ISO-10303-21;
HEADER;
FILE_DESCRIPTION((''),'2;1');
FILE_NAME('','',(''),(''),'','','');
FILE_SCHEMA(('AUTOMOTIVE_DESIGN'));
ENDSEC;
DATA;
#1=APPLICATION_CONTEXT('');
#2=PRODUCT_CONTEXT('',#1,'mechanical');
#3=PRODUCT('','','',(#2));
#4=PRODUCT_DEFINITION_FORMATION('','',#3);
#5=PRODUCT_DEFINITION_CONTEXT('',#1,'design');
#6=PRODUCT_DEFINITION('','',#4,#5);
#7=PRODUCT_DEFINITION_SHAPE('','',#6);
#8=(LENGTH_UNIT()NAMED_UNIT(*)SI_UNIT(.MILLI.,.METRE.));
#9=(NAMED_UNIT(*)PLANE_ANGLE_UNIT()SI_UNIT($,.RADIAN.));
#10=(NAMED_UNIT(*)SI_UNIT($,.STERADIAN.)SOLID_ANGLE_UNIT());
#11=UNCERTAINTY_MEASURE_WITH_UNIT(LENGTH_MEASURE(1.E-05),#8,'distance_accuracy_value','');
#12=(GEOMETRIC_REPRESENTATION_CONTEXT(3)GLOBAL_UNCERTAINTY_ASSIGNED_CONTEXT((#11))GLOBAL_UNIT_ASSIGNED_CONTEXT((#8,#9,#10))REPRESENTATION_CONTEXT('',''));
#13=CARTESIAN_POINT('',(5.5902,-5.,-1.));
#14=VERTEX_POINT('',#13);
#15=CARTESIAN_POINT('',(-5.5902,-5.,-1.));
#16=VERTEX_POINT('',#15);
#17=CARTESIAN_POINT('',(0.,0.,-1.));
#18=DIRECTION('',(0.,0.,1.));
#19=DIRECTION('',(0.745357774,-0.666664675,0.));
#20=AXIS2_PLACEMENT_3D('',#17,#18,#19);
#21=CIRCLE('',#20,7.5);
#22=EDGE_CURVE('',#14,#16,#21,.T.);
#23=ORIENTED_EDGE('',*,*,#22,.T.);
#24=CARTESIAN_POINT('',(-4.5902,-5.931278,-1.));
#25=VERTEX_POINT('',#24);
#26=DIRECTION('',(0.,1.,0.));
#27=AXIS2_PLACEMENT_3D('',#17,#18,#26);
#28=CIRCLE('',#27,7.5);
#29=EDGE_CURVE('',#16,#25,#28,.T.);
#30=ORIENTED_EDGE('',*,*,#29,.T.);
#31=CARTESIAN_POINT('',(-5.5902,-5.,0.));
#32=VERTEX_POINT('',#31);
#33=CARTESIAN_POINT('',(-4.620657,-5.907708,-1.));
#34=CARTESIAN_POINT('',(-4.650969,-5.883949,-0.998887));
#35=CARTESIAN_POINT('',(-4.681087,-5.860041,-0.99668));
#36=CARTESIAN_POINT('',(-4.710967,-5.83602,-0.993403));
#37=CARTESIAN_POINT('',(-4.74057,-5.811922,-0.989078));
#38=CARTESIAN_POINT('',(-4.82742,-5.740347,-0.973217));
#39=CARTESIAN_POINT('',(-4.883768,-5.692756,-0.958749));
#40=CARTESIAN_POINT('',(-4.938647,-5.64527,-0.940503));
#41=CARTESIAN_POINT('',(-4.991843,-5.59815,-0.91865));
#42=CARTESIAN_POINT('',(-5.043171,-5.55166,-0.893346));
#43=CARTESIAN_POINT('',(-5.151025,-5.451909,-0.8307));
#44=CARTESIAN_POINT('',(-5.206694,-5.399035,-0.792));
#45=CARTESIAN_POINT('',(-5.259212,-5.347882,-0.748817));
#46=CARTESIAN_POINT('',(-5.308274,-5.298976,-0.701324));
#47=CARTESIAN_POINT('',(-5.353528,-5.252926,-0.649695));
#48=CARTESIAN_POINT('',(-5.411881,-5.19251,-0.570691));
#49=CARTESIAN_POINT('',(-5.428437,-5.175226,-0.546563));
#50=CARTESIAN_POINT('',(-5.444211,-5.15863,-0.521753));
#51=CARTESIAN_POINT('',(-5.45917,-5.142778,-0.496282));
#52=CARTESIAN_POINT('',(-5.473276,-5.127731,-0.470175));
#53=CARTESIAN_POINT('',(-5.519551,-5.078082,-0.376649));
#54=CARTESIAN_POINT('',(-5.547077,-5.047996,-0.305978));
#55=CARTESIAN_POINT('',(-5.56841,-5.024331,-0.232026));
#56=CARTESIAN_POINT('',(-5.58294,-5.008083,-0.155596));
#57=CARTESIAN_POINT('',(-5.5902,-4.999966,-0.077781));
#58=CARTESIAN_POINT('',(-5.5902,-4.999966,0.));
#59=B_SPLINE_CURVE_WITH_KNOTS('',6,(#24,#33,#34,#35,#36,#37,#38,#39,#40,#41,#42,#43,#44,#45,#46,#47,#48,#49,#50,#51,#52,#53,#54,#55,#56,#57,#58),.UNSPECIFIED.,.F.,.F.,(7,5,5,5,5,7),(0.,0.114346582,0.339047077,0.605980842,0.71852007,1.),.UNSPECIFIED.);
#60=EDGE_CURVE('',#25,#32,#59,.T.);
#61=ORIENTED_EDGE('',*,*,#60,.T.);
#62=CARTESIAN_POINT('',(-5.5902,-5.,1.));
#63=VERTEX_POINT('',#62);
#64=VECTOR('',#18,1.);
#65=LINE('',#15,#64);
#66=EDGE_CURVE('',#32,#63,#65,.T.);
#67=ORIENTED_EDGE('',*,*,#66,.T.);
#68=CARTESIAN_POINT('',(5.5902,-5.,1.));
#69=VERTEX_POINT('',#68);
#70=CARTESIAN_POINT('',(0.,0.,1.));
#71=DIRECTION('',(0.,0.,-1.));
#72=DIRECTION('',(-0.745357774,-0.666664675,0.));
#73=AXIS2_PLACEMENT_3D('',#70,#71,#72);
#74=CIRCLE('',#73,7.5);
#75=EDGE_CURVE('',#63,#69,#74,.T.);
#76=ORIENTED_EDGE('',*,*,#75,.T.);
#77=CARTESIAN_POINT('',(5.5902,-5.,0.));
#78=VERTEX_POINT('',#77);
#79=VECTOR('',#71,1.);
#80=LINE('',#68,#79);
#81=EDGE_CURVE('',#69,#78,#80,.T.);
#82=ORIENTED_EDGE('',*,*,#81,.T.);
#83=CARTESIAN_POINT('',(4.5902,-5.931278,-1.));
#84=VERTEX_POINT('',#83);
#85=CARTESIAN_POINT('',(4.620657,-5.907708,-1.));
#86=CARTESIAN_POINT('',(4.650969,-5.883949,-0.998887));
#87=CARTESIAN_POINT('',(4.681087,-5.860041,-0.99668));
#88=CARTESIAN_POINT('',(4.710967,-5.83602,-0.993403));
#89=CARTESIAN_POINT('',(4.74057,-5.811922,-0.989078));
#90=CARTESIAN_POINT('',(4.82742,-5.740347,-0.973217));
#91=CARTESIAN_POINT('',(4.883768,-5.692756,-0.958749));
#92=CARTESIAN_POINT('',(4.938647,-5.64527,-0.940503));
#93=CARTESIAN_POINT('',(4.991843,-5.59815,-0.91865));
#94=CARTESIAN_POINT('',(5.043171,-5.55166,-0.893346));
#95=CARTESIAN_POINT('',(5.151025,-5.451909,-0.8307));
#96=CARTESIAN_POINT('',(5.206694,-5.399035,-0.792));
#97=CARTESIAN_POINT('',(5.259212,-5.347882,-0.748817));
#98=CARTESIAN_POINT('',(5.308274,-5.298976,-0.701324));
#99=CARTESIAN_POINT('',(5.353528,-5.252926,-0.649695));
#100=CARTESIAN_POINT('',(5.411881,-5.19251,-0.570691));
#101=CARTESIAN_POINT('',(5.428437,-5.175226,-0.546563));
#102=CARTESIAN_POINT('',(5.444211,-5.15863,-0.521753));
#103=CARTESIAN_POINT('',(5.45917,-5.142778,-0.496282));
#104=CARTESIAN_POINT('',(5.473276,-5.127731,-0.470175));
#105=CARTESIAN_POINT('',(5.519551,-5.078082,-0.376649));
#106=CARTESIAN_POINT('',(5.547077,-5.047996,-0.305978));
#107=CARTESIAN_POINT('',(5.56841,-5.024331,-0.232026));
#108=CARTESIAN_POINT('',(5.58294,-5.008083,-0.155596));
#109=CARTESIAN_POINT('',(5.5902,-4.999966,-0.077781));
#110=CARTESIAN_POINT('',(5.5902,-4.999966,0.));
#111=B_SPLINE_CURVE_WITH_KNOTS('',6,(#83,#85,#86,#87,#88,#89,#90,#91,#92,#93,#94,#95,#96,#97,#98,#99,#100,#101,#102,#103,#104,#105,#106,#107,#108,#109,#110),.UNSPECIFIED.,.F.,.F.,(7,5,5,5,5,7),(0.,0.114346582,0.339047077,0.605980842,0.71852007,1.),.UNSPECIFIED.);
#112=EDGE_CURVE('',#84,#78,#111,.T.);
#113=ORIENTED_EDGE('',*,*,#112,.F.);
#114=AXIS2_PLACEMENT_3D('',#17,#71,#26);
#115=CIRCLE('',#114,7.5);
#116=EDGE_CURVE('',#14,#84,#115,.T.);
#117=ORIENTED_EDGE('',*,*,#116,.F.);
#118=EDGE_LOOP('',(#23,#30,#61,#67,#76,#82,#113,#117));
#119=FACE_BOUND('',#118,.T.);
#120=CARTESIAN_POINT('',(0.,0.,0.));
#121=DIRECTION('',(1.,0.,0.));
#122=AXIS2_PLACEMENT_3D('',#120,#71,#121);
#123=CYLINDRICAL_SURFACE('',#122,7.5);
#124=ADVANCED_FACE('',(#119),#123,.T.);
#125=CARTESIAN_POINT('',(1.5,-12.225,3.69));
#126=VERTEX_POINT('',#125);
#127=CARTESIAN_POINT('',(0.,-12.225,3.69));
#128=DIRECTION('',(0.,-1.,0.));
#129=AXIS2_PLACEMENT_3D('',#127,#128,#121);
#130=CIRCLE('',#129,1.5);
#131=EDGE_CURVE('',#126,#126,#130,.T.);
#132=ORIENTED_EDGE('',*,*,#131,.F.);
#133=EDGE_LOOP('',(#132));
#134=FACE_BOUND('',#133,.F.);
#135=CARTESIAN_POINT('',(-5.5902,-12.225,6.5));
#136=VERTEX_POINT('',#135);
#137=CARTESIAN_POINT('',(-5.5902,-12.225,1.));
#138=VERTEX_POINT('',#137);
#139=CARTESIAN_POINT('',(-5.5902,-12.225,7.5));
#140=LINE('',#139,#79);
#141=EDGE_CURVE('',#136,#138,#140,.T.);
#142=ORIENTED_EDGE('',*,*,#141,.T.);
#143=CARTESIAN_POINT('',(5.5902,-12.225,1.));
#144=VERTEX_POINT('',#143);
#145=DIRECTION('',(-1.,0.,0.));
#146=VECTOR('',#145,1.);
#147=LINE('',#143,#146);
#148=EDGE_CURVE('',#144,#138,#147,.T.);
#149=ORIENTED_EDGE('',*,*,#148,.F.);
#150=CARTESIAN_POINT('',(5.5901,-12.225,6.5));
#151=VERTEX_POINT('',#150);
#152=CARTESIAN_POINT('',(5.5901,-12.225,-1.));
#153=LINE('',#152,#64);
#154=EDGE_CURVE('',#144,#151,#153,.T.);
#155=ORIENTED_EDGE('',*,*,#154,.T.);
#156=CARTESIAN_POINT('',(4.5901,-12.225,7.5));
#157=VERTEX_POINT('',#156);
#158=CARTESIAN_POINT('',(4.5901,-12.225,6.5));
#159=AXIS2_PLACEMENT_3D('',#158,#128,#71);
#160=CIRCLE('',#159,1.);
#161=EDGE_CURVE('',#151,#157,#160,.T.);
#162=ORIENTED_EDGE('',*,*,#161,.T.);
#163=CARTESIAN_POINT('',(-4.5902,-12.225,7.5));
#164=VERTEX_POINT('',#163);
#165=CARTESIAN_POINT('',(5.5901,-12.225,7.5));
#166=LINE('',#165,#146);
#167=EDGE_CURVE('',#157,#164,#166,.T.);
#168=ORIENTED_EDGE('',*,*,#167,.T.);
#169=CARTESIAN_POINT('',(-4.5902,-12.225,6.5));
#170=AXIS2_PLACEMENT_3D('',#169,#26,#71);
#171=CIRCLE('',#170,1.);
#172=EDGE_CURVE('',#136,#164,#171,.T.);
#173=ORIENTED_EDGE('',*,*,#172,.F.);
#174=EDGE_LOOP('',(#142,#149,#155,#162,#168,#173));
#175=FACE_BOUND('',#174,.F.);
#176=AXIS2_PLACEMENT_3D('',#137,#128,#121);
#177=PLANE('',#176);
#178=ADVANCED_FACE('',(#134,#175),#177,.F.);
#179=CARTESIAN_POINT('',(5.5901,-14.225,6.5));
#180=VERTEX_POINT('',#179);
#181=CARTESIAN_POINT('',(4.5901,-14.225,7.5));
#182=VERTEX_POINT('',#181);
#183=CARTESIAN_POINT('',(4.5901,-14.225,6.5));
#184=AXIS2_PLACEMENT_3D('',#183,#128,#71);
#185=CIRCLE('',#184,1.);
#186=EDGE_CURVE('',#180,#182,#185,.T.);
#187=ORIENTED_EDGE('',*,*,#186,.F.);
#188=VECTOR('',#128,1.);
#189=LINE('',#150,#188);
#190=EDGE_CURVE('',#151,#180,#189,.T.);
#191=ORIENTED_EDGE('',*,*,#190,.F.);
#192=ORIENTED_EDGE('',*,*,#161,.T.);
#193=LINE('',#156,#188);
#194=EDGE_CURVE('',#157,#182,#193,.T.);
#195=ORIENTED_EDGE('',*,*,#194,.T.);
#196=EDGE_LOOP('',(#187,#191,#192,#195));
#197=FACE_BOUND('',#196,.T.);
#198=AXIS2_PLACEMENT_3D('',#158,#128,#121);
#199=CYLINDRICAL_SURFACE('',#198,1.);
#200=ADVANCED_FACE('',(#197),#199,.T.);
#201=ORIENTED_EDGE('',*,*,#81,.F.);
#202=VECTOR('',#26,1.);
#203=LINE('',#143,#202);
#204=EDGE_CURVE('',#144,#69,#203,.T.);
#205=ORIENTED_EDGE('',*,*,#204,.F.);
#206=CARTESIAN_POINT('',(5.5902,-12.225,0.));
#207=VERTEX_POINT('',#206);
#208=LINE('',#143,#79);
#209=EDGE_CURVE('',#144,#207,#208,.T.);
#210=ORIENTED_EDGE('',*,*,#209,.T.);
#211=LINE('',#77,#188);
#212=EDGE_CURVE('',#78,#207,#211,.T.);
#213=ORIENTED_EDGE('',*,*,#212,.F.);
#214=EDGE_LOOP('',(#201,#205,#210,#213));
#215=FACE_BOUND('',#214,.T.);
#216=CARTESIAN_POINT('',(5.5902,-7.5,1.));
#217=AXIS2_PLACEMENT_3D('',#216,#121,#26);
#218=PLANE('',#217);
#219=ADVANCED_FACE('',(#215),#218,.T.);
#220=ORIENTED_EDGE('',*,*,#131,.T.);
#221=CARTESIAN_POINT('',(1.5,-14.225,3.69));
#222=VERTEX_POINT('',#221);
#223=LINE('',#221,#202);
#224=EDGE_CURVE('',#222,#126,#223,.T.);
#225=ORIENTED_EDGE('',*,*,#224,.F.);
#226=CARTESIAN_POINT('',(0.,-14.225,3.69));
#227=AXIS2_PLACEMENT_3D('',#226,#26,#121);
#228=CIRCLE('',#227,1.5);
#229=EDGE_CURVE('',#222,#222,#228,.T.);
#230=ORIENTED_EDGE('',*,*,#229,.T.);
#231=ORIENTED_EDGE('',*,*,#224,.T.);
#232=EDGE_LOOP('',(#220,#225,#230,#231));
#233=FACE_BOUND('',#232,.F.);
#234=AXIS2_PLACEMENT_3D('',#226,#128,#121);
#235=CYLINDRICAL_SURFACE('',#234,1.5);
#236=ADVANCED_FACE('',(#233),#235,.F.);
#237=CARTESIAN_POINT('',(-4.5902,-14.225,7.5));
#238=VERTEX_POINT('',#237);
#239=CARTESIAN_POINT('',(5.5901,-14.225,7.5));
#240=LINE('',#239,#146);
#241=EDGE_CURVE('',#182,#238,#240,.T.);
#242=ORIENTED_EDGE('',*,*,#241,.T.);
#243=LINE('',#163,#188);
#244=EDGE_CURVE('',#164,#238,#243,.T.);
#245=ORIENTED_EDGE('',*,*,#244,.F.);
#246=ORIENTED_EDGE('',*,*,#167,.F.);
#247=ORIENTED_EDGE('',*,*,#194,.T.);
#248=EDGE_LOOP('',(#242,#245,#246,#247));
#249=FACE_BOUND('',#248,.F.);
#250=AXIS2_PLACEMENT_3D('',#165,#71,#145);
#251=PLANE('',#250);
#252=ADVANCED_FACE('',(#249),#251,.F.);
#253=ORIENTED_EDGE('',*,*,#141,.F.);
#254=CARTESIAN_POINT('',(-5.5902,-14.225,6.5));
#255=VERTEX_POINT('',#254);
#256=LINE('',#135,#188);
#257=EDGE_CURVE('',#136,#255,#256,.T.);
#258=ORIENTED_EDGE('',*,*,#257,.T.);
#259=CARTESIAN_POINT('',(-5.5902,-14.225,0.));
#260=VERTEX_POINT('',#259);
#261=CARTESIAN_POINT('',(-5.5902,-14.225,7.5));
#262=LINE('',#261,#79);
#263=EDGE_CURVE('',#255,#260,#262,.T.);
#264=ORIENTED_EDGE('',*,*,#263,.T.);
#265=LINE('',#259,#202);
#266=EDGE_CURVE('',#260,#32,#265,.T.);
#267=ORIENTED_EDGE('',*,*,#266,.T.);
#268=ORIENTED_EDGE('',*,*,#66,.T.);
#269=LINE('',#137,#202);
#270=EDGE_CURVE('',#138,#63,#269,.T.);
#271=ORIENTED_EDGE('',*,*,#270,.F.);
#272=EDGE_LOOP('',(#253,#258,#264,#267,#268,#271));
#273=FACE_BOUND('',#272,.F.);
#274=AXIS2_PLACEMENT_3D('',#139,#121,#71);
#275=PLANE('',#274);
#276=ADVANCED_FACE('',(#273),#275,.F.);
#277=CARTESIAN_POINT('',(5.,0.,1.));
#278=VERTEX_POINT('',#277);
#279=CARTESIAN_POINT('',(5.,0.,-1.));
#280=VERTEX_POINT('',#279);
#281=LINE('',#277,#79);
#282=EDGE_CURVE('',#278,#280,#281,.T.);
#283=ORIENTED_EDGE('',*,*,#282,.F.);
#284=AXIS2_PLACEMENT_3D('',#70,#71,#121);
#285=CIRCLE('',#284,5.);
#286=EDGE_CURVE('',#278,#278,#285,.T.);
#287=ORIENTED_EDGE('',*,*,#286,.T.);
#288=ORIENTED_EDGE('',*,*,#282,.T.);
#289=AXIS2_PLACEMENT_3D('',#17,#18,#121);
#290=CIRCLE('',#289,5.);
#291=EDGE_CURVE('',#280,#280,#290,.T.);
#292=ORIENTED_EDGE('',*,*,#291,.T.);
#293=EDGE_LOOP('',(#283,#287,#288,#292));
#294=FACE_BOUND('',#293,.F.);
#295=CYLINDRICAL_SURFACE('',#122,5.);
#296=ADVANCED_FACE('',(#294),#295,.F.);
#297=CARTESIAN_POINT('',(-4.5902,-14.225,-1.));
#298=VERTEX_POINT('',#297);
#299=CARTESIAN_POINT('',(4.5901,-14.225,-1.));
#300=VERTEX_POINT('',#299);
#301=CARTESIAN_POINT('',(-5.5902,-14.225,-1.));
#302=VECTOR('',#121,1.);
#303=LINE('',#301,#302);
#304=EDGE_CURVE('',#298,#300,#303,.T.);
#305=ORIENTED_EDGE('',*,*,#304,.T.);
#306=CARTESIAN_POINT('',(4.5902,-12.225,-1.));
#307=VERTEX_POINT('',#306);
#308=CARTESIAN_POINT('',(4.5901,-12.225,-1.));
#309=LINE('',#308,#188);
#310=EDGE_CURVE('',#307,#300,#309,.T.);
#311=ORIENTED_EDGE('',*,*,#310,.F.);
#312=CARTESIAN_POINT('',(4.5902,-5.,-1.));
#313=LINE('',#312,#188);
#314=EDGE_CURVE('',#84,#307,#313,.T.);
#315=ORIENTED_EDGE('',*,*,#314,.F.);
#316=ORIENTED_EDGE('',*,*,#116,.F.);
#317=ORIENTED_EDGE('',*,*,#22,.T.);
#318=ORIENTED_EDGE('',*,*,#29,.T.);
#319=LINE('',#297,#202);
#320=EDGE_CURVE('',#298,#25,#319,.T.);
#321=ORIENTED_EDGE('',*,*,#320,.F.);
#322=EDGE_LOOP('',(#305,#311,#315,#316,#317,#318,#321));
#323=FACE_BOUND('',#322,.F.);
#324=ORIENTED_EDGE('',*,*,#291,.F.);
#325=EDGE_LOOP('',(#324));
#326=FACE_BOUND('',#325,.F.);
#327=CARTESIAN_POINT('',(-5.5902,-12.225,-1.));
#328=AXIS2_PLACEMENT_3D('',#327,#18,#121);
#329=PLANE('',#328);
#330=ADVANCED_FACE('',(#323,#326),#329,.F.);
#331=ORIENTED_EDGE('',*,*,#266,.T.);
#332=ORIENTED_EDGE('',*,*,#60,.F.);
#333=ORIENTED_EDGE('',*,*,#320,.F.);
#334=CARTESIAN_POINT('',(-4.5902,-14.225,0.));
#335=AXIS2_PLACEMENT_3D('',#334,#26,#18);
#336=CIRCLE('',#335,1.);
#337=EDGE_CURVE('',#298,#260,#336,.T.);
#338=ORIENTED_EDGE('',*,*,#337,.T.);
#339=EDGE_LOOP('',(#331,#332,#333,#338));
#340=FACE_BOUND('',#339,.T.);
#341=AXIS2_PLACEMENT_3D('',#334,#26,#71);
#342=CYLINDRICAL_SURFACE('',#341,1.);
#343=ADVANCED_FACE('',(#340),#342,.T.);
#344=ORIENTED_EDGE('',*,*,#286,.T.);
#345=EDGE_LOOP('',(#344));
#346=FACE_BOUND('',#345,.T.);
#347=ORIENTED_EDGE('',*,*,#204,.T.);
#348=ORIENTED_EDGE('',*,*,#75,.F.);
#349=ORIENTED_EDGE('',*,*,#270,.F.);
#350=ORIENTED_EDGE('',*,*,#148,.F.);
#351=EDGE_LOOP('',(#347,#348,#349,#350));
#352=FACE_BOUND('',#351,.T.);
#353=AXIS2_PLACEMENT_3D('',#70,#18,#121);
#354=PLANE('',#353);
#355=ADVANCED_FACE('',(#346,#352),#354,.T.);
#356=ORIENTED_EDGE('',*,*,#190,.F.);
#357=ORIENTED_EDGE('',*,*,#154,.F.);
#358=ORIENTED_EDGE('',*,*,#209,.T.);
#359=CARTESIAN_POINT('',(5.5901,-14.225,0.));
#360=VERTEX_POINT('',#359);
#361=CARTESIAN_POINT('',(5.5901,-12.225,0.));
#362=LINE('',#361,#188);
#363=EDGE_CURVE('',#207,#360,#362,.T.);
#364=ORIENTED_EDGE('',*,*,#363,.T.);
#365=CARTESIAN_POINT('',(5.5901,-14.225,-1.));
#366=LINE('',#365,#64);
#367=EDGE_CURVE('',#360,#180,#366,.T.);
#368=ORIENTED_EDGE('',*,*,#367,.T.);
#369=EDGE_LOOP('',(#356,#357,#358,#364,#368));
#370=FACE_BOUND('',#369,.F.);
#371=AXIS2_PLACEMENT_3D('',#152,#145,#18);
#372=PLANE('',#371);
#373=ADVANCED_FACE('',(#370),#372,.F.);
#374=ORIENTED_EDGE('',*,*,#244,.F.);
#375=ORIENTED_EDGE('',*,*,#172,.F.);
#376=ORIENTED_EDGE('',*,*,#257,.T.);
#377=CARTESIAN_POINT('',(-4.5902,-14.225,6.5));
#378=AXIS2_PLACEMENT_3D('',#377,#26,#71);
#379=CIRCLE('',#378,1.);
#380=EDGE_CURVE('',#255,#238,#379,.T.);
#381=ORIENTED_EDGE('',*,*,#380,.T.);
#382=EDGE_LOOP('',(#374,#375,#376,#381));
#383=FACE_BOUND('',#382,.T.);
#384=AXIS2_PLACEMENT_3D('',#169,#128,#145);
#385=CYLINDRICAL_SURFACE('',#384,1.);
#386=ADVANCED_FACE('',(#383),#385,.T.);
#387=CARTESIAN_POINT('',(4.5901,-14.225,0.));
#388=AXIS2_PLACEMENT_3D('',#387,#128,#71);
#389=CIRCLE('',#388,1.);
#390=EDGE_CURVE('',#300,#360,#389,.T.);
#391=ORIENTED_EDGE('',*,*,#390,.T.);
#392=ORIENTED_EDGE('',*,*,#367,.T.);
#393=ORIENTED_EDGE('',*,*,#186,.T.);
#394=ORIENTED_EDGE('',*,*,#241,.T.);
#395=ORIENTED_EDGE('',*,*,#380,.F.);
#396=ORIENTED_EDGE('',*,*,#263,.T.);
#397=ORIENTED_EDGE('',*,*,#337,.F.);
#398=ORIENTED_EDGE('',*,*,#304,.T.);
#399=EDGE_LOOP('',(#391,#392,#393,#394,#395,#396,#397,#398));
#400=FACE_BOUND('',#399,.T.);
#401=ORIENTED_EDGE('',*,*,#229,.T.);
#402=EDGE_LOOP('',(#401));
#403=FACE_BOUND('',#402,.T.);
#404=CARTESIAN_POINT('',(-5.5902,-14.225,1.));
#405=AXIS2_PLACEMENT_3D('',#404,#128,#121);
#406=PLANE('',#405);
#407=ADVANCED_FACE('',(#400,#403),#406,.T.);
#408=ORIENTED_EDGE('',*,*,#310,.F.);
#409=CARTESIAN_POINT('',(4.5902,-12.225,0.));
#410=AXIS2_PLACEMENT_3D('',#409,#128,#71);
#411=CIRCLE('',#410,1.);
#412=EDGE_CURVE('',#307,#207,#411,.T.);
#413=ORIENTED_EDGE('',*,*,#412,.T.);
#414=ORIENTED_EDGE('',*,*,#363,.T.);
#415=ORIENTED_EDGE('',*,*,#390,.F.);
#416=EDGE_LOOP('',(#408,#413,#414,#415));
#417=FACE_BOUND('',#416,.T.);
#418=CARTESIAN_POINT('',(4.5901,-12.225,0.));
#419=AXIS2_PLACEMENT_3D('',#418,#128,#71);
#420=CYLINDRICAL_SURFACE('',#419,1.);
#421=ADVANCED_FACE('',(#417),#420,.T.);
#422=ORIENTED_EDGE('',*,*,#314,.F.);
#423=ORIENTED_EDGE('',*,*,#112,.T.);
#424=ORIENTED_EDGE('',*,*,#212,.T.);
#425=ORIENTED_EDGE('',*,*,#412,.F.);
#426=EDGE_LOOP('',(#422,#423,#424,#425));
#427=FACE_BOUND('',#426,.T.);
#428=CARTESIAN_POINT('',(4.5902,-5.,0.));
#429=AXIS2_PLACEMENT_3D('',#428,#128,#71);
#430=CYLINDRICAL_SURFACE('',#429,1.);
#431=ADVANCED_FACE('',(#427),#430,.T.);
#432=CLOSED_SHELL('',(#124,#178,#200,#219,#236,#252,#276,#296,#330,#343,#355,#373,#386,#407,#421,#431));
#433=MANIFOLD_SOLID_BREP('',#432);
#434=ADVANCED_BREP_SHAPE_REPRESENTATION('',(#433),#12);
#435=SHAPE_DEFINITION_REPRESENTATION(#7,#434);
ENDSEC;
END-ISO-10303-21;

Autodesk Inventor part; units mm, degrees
ref_plane "YZ Plane" through (0, 0, 0) normal (1, 0, 0) x (0, 1, 0)
ref_plane "XZ Plane" through (0, 0, 0) normal (0, 1, 0) x (-1, 0, 0)
ref_plane "XY Plane" through (0, 0, 0) normal (0, 0, 1) x (1, 0, 0)
sketch "Sketch1" plane through (0, 0, 0) normal (0, 0, 1) x (1, 0, 0)
  circle A0 centre (0, 0) radius 4.85 projected
  circle A1 centre (0, 0) radius 5
  circle A2 centre (0, 0) radius 7.5
  dimension "d0" = 10
  dimension "d1" = 15
extrude "Extrusion1" add sketch "Sketch1" along normal mid plane 2 contours A2
sketch "Sketch2" plane through (0, 0, 1) normal (0, 0, 1) x (1, 0, 0)
  circle A0 centre (0, 0) radius 7.5 projected
  line L0 (-5.5902, -5) -> (0, -5)
  line L1 (0, -5) -> (0, -7.5)
  line L2 (-5.5902, -7.5) -> (-5.5902, -5)
  circle A1 centre (0, 0) radius 7.5
  line L3 (5.5902, -5) -> (0, -5)
  line L4 (5.5902, -7.5) -> (5.5902, -5)
  line L5 (3.3913, -9.725) -> (-18.205, -9.725) projected
  line L6 (-5.5902, -7.5) -> (-5.5902, -9.725)
  line L7 (5.5902, -9.725) -> (5.5902, -7.5)
  line L8 (5.5902, -9.725) -> (5.5902, -12.225)
  line L9 (5.5902, -12.225) -> (-5.5902, -12.225)
  line L10 (-5.5902, -12.225) -> (-5.5902, -9.725)
  dimension "d13" = 2.5
extrude "Extrusion2" add sketch "Sketch2" against normal blind 2 contours A0 L4 L7 L8 L9 L10 L6 L2 | A0 L1 L3
sketch "Sketch5" plane through (-5.5902, -12.225, 1) normal (0, -1, 0) x (1, 0, 0)
  line L0 (11.1803, -2) -> (11.1803, 6.5)
  line L1 (11.1803, 6.5) -> (0, 6.5)
  line L2 (0, 6.5) -> (0, -2)
  line L3 (0, -2) -> (11.1803, -2)
  line L4 (11.1803, -2) -> (11.1803, 6.5)
  point P0 (5.5902, -1)
  dimension "d14" = 8.5
extrude "Extrusion5" add sketch "Sketch5" along normal blind 2
sketch "Sketch6" plane through (-5.5902, -14.225, 1) normal (0, -1, 0) x (1, 0, 0)
  line L0 (11.1803, 6.5) -> (0, 6.5) projected
  line L1 (5.5902, 6.5) -> (5.5902, 2.69)
  circle A0 centre (5.5902, 2.69) radius 1.5
  point P0 (5.5902, -1)
  dimension "d17" = 3.81
  dimension "d18" = 3
extrude "Extrusion6" cut sketch "Sketch6" against normal blind 2
fillet "Fillet1" radius 1 4 edges at (5.5902, -13.225, 7.5) (-5.5902, -13.225, 7.5) (5.5902, -9.6125, -1) (-5.5902, -9.6125, -1)
properties part number "SyringeTailConnector"
